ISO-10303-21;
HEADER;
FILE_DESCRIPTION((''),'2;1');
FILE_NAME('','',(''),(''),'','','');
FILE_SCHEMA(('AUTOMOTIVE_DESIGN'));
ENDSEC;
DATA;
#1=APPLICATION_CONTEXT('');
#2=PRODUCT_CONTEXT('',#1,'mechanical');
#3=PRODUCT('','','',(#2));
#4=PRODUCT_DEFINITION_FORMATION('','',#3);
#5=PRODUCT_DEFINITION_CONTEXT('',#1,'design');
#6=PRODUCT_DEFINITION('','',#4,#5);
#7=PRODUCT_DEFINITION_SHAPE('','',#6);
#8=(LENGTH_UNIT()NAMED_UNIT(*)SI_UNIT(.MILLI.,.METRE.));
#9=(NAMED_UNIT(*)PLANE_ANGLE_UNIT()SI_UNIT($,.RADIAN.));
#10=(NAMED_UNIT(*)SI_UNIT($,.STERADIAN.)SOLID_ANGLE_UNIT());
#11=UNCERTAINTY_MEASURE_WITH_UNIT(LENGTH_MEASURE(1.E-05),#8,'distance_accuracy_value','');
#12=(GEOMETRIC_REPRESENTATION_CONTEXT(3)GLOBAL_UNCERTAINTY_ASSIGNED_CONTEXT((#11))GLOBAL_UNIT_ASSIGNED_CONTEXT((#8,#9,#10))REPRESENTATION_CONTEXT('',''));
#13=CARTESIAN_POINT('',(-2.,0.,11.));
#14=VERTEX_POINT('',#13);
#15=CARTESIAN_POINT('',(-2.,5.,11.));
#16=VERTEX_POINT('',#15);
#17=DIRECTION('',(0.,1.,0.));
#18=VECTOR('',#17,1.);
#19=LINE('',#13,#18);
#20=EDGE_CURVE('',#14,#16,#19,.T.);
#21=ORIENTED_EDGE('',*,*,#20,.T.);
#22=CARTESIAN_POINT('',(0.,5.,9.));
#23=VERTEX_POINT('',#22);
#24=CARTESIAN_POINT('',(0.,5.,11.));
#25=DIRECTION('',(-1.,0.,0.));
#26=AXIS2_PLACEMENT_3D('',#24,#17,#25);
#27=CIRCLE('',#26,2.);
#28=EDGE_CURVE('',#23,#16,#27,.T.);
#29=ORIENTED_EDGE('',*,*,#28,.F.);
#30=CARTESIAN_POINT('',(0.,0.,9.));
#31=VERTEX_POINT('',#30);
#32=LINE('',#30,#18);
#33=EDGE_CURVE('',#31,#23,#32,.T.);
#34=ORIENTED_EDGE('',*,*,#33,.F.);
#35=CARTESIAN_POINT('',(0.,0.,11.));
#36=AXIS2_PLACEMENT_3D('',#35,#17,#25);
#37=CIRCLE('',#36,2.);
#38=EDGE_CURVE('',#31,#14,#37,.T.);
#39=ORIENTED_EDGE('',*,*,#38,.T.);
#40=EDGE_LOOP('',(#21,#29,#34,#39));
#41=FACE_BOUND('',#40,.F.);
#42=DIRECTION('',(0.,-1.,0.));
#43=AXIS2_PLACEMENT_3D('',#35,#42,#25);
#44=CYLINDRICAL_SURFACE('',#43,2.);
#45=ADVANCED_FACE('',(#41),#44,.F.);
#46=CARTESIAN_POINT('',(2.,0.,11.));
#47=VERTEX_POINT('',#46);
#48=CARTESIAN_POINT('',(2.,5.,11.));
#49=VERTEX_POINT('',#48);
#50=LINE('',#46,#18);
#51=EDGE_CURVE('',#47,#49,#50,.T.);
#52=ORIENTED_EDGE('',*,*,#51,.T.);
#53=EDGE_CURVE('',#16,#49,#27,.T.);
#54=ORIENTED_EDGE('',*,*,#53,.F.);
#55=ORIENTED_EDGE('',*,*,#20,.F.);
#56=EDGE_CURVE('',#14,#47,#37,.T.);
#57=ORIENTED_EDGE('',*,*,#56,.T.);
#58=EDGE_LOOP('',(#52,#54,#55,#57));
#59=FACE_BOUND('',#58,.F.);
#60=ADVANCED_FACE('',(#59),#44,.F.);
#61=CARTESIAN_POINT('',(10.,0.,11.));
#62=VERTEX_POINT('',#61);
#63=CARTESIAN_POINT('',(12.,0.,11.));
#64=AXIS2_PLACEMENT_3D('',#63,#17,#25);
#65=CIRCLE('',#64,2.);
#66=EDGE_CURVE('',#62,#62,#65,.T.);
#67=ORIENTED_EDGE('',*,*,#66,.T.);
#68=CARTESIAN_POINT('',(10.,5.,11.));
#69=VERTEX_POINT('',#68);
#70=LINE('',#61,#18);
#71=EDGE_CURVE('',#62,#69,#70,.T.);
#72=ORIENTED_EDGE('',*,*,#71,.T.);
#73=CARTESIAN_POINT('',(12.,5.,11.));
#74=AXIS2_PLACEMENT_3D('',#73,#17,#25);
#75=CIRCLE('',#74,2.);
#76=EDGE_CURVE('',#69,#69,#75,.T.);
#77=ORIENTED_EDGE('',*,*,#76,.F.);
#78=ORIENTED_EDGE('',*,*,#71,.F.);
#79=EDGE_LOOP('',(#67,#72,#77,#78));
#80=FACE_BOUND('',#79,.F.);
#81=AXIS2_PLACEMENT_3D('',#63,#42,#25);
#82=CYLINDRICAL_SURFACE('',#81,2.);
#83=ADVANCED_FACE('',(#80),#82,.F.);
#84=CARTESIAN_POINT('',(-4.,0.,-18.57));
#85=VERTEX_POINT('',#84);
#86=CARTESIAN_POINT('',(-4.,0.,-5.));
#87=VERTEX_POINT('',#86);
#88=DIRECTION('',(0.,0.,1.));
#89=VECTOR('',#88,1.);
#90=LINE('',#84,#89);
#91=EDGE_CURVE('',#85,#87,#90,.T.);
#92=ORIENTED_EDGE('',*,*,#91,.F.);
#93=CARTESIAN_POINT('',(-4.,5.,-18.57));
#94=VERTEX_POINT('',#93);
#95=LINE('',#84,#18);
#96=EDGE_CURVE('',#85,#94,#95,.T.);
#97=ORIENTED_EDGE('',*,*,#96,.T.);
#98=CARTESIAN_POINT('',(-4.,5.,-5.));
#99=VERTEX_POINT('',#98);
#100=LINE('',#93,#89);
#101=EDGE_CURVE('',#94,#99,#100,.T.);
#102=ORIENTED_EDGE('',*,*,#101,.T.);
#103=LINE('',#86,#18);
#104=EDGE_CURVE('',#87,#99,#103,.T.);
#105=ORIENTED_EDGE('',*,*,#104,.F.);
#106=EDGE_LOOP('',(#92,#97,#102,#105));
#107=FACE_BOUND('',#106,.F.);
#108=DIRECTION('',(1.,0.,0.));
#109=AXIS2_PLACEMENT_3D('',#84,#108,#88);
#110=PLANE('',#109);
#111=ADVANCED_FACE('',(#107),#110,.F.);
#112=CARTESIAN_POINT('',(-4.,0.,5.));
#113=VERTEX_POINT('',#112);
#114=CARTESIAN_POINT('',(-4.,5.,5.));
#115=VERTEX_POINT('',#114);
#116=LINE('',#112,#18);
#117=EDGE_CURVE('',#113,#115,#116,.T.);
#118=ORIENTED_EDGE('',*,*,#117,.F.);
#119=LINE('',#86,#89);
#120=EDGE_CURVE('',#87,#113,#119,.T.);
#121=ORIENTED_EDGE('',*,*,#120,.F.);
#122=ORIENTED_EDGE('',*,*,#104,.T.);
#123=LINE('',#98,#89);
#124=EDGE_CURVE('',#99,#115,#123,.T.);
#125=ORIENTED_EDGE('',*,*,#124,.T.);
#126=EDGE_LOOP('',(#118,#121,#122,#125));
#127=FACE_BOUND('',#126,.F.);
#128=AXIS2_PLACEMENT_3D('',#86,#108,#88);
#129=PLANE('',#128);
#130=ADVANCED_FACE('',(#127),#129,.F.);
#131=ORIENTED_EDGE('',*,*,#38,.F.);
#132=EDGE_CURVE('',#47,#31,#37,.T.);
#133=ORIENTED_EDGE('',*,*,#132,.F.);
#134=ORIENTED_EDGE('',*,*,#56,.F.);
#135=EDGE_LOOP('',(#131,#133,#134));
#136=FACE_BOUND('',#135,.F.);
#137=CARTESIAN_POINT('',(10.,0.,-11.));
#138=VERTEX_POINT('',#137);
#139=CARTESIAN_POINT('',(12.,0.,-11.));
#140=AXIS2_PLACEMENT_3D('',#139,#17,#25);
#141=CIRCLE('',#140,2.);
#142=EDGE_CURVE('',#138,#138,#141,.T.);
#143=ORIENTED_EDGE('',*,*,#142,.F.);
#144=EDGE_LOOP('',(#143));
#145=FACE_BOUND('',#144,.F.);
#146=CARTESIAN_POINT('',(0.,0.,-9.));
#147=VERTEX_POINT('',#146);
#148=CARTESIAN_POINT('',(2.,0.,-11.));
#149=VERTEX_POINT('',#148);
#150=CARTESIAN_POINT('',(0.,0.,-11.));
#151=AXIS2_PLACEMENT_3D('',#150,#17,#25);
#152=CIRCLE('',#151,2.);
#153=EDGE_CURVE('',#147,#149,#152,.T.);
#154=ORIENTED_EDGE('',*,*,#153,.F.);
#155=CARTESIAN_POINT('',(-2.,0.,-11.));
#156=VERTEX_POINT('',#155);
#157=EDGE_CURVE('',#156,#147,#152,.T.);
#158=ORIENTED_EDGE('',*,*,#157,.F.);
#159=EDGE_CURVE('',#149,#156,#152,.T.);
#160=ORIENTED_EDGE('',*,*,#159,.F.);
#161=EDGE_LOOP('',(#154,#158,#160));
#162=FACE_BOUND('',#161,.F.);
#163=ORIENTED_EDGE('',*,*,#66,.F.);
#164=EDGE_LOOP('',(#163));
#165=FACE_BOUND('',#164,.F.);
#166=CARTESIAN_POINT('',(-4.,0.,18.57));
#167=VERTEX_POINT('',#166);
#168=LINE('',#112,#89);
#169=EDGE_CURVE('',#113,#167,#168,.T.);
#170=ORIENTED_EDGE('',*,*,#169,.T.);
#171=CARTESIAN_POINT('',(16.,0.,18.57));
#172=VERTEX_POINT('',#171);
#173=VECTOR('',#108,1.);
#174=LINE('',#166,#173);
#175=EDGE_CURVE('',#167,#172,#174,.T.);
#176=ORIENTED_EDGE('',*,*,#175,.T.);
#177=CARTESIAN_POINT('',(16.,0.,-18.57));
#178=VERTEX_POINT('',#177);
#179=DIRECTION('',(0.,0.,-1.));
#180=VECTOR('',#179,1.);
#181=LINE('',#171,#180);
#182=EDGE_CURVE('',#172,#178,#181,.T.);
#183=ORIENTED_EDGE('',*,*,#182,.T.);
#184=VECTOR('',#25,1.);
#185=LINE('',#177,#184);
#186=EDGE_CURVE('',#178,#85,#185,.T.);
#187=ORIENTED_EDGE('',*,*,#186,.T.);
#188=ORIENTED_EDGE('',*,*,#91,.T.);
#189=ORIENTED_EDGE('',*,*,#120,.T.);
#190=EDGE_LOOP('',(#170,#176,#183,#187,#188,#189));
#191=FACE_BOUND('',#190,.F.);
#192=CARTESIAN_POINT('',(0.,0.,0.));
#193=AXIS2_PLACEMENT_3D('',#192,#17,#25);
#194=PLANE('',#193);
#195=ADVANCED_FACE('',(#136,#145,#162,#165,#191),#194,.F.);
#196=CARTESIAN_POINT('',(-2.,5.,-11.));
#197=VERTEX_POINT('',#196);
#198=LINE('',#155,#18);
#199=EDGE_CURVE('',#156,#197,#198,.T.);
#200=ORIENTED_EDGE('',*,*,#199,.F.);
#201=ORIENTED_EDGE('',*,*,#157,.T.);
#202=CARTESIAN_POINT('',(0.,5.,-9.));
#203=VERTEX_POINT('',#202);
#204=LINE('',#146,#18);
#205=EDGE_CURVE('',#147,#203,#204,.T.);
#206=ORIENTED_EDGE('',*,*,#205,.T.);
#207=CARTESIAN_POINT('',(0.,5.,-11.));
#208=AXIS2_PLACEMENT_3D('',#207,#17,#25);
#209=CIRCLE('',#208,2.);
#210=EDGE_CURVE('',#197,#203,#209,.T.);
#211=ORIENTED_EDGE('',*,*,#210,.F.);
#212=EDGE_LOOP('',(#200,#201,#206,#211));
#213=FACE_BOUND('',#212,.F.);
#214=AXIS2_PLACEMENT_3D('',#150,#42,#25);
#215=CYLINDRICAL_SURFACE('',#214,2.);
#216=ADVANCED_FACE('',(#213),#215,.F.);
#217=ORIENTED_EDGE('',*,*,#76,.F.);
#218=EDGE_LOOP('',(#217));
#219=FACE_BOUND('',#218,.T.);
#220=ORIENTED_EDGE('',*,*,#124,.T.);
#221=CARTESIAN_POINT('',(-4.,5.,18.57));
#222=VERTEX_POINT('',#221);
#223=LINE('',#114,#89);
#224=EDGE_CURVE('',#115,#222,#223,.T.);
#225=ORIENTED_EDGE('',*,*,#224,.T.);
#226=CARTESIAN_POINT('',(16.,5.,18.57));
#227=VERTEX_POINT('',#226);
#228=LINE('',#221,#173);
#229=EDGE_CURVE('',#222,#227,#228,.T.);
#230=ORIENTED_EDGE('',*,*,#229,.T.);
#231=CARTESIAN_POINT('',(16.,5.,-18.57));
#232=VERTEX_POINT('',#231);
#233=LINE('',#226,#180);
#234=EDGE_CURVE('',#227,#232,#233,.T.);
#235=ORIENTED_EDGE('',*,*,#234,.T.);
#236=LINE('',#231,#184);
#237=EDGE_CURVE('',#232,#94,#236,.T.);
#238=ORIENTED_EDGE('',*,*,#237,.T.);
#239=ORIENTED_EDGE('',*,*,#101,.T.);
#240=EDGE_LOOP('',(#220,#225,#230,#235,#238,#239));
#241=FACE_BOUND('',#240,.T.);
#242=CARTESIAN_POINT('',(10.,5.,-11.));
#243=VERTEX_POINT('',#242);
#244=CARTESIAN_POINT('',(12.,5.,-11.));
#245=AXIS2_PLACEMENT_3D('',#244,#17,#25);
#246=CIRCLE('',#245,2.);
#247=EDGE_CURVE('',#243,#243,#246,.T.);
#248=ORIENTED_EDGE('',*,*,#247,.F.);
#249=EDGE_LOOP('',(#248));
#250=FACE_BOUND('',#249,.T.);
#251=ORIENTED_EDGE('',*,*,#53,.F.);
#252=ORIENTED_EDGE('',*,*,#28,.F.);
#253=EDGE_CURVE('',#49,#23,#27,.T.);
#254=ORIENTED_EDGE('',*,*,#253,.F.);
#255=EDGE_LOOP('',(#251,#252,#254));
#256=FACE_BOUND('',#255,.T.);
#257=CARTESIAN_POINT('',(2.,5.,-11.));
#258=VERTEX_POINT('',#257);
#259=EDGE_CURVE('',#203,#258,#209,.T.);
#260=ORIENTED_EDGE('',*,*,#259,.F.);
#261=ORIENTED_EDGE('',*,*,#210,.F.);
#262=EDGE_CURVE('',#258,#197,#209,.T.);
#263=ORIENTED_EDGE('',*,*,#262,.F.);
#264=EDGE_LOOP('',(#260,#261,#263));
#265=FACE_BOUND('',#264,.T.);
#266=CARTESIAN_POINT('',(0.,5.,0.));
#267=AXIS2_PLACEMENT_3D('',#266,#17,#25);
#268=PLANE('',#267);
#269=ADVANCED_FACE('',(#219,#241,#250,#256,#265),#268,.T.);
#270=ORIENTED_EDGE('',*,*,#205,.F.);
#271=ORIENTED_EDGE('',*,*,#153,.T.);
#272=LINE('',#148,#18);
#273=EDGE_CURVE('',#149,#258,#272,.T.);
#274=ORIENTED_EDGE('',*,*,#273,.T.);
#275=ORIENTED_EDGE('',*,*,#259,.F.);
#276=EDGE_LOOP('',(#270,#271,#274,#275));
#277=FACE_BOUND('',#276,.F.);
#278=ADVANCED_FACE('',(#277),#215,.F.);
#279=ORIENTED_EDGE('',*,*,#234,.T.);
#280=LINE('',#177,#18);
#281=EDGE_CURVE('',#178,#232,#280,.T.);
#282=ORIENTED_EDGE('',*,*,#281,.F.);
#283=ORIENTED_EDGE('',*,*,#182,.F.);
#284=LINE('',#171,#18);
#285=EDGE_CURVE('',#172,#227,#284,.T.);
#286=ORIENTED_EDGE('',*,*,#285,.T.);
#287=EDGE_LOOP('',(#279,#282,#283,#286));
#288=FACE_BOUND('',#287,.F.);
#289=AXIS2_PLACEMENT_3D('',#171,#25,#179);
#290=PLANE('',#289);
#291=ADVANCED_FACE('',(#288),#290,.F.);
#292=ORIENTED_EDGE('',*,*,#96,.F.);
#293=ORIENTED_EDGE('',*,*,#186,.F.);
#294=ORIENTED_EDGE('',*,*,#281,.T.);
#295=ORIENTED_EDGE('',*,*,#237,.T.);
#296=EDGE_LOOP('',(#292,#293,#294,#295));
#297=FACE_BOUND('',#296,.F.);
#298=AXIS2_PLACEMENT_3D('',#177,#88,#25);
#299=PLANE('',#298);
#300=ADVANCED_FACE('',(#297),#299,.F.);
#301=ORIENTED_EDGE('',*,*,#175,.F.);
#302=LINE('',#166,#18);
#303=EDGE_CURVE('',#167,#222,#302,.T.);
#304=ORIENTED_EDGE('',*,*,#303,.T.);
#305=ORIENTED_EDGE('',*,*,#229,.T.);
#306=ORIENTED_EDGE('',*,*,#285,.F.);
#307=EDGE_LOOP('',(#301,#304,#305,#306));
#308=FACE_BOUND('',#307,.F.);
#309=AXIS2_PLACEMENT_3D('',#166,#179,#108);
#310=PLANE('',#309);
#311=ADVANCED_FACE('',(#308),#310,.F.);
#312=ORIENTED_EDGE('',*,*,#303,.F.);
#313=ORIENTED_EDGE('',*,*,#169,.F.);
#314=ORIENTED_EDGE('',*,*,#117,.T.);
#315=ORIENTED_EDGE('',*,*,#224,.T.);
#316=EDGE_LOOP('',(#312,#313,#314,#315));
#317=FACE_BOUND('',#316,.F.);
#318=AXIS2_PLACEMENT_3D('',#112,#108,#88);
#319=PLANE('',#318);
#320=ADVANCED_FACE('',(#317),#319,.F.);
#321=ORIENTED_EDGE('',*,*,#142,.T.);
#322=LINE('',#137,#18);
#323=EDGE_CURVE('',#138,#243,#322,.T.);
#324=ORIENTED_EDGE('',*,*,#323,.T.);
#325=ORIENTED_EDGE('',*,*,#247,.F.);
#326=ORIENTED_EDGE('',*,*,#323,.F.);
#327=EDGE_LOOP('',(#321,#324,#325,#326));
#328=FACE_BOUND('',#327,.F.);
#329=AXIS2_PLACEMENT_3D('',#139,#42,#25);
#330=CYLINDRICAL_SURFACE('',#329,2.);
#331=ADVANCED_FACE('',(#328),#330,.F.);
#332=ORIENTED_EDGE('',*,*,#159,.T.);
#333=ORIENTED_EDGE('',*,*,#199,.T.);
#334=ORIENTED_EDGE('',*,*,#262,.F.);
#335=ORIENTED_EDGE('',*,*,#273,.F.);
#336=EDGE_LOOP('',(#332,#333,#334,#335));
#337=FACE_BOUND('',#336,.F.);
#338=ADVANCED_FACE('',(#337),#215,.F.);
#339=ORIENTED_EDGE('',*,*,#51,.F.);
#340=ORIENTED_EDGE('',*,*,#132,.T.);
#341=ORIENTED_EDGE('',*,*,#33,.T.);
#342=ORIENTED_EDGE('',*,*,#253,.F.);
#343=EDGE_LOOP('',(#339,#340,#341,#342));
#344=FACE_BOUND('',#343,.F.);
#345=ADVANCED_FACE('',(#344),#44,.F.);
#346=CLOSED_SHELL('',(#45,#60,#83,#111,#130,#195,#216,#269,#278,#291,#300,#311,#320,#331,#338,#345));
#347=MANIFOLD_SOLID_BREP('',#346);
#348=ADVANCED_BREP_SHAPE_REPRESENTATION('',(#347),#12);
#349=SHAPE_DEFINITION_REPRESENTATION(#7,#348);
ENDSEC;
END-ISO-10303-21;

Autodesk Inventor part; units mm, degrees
ref_plane "YZ Plane" through (0, 0, 0) normal (1, 0, 0) x (0, 1, 0)
ref_plane "XZ Plane" through (0, 0, 0) normal (0, 1, 0) x (-1, 0, 0)
ref_plane "XY Plane" through (0, 0, 0) normal (0, 0, 1) x (1, 0, 0)
sketch "Boceto1" plane through (0, 0, 0) normal (0, 1, 0) x (-1, 0, 0)
  line L0 (4, 5) -> (4, 18.57)
  line L1 (4, 18.57) -> (-16, 18.57)
  line L2 (-16, 18.57) -> (-16, -18.57)
  line L3 (-16, -18.57) -> (4, -18.57)
  line L4 (4, -18.57) -> (4, -5)
  line L5 (0, -5) -> (0, -11)
  line L6 (0, 5) -> (0, 11)
  line L7 (0, -11) -> (-12, -11)
  line L8 (0, 11) -> (-12, 11)
  circle A0 centre (0, 11) radius 2
  circle A1 centre (0, -11) radius 2
  circle A2 centre (-12, -11) radius 2
  circle A3 centre (-12, 11) radius 2
  line L9 (4, -5) -> (4, 5)
  point P0 (0, 0)
  dimension "d0" = 5
  dimension "d1" = 4
  dimension "d2" = 13.57
  dimension "d3" = 20
  dimension "d4" = 37.14
  dimension "d5" = 20
  dimension "d6" = 13.57
  dimension "d7" = 4
  dimension "d8" = 6
  dimension "d9" = 6
  dimension "d11" = 12
  dimension "d12" = 12
  dimension "d13" = 4
  dimension "d14" = 4
  dimension "d15" = 4
  dimension "d16" = 4
extrude "Extrusión1" add sketch "Boceto1" along normal blind 5
equation "\"Radio_pliegue\" = Grosor"
equation "\"Anchura_desahogo_plegado\" = Grosor"
equation "\"Profundidad_desahogo_plegado\" = 0.5 * Grosor"
equation "\"Tamaño_destalonado\" = 4 * Grosor"
equation "\"Remanente_mínimo\" = 2 * Grosor"
equation "\"Radiodetransición\" = Radio_pliegue"
equation "\"Tamaño_de_radio_de_Jacobi\" = Radio_pliegue"
equation "\"TamañoSeparación\" = Grosor"
equation "\"Grosor\" = 0.5"
properties part number "Sujetador"
